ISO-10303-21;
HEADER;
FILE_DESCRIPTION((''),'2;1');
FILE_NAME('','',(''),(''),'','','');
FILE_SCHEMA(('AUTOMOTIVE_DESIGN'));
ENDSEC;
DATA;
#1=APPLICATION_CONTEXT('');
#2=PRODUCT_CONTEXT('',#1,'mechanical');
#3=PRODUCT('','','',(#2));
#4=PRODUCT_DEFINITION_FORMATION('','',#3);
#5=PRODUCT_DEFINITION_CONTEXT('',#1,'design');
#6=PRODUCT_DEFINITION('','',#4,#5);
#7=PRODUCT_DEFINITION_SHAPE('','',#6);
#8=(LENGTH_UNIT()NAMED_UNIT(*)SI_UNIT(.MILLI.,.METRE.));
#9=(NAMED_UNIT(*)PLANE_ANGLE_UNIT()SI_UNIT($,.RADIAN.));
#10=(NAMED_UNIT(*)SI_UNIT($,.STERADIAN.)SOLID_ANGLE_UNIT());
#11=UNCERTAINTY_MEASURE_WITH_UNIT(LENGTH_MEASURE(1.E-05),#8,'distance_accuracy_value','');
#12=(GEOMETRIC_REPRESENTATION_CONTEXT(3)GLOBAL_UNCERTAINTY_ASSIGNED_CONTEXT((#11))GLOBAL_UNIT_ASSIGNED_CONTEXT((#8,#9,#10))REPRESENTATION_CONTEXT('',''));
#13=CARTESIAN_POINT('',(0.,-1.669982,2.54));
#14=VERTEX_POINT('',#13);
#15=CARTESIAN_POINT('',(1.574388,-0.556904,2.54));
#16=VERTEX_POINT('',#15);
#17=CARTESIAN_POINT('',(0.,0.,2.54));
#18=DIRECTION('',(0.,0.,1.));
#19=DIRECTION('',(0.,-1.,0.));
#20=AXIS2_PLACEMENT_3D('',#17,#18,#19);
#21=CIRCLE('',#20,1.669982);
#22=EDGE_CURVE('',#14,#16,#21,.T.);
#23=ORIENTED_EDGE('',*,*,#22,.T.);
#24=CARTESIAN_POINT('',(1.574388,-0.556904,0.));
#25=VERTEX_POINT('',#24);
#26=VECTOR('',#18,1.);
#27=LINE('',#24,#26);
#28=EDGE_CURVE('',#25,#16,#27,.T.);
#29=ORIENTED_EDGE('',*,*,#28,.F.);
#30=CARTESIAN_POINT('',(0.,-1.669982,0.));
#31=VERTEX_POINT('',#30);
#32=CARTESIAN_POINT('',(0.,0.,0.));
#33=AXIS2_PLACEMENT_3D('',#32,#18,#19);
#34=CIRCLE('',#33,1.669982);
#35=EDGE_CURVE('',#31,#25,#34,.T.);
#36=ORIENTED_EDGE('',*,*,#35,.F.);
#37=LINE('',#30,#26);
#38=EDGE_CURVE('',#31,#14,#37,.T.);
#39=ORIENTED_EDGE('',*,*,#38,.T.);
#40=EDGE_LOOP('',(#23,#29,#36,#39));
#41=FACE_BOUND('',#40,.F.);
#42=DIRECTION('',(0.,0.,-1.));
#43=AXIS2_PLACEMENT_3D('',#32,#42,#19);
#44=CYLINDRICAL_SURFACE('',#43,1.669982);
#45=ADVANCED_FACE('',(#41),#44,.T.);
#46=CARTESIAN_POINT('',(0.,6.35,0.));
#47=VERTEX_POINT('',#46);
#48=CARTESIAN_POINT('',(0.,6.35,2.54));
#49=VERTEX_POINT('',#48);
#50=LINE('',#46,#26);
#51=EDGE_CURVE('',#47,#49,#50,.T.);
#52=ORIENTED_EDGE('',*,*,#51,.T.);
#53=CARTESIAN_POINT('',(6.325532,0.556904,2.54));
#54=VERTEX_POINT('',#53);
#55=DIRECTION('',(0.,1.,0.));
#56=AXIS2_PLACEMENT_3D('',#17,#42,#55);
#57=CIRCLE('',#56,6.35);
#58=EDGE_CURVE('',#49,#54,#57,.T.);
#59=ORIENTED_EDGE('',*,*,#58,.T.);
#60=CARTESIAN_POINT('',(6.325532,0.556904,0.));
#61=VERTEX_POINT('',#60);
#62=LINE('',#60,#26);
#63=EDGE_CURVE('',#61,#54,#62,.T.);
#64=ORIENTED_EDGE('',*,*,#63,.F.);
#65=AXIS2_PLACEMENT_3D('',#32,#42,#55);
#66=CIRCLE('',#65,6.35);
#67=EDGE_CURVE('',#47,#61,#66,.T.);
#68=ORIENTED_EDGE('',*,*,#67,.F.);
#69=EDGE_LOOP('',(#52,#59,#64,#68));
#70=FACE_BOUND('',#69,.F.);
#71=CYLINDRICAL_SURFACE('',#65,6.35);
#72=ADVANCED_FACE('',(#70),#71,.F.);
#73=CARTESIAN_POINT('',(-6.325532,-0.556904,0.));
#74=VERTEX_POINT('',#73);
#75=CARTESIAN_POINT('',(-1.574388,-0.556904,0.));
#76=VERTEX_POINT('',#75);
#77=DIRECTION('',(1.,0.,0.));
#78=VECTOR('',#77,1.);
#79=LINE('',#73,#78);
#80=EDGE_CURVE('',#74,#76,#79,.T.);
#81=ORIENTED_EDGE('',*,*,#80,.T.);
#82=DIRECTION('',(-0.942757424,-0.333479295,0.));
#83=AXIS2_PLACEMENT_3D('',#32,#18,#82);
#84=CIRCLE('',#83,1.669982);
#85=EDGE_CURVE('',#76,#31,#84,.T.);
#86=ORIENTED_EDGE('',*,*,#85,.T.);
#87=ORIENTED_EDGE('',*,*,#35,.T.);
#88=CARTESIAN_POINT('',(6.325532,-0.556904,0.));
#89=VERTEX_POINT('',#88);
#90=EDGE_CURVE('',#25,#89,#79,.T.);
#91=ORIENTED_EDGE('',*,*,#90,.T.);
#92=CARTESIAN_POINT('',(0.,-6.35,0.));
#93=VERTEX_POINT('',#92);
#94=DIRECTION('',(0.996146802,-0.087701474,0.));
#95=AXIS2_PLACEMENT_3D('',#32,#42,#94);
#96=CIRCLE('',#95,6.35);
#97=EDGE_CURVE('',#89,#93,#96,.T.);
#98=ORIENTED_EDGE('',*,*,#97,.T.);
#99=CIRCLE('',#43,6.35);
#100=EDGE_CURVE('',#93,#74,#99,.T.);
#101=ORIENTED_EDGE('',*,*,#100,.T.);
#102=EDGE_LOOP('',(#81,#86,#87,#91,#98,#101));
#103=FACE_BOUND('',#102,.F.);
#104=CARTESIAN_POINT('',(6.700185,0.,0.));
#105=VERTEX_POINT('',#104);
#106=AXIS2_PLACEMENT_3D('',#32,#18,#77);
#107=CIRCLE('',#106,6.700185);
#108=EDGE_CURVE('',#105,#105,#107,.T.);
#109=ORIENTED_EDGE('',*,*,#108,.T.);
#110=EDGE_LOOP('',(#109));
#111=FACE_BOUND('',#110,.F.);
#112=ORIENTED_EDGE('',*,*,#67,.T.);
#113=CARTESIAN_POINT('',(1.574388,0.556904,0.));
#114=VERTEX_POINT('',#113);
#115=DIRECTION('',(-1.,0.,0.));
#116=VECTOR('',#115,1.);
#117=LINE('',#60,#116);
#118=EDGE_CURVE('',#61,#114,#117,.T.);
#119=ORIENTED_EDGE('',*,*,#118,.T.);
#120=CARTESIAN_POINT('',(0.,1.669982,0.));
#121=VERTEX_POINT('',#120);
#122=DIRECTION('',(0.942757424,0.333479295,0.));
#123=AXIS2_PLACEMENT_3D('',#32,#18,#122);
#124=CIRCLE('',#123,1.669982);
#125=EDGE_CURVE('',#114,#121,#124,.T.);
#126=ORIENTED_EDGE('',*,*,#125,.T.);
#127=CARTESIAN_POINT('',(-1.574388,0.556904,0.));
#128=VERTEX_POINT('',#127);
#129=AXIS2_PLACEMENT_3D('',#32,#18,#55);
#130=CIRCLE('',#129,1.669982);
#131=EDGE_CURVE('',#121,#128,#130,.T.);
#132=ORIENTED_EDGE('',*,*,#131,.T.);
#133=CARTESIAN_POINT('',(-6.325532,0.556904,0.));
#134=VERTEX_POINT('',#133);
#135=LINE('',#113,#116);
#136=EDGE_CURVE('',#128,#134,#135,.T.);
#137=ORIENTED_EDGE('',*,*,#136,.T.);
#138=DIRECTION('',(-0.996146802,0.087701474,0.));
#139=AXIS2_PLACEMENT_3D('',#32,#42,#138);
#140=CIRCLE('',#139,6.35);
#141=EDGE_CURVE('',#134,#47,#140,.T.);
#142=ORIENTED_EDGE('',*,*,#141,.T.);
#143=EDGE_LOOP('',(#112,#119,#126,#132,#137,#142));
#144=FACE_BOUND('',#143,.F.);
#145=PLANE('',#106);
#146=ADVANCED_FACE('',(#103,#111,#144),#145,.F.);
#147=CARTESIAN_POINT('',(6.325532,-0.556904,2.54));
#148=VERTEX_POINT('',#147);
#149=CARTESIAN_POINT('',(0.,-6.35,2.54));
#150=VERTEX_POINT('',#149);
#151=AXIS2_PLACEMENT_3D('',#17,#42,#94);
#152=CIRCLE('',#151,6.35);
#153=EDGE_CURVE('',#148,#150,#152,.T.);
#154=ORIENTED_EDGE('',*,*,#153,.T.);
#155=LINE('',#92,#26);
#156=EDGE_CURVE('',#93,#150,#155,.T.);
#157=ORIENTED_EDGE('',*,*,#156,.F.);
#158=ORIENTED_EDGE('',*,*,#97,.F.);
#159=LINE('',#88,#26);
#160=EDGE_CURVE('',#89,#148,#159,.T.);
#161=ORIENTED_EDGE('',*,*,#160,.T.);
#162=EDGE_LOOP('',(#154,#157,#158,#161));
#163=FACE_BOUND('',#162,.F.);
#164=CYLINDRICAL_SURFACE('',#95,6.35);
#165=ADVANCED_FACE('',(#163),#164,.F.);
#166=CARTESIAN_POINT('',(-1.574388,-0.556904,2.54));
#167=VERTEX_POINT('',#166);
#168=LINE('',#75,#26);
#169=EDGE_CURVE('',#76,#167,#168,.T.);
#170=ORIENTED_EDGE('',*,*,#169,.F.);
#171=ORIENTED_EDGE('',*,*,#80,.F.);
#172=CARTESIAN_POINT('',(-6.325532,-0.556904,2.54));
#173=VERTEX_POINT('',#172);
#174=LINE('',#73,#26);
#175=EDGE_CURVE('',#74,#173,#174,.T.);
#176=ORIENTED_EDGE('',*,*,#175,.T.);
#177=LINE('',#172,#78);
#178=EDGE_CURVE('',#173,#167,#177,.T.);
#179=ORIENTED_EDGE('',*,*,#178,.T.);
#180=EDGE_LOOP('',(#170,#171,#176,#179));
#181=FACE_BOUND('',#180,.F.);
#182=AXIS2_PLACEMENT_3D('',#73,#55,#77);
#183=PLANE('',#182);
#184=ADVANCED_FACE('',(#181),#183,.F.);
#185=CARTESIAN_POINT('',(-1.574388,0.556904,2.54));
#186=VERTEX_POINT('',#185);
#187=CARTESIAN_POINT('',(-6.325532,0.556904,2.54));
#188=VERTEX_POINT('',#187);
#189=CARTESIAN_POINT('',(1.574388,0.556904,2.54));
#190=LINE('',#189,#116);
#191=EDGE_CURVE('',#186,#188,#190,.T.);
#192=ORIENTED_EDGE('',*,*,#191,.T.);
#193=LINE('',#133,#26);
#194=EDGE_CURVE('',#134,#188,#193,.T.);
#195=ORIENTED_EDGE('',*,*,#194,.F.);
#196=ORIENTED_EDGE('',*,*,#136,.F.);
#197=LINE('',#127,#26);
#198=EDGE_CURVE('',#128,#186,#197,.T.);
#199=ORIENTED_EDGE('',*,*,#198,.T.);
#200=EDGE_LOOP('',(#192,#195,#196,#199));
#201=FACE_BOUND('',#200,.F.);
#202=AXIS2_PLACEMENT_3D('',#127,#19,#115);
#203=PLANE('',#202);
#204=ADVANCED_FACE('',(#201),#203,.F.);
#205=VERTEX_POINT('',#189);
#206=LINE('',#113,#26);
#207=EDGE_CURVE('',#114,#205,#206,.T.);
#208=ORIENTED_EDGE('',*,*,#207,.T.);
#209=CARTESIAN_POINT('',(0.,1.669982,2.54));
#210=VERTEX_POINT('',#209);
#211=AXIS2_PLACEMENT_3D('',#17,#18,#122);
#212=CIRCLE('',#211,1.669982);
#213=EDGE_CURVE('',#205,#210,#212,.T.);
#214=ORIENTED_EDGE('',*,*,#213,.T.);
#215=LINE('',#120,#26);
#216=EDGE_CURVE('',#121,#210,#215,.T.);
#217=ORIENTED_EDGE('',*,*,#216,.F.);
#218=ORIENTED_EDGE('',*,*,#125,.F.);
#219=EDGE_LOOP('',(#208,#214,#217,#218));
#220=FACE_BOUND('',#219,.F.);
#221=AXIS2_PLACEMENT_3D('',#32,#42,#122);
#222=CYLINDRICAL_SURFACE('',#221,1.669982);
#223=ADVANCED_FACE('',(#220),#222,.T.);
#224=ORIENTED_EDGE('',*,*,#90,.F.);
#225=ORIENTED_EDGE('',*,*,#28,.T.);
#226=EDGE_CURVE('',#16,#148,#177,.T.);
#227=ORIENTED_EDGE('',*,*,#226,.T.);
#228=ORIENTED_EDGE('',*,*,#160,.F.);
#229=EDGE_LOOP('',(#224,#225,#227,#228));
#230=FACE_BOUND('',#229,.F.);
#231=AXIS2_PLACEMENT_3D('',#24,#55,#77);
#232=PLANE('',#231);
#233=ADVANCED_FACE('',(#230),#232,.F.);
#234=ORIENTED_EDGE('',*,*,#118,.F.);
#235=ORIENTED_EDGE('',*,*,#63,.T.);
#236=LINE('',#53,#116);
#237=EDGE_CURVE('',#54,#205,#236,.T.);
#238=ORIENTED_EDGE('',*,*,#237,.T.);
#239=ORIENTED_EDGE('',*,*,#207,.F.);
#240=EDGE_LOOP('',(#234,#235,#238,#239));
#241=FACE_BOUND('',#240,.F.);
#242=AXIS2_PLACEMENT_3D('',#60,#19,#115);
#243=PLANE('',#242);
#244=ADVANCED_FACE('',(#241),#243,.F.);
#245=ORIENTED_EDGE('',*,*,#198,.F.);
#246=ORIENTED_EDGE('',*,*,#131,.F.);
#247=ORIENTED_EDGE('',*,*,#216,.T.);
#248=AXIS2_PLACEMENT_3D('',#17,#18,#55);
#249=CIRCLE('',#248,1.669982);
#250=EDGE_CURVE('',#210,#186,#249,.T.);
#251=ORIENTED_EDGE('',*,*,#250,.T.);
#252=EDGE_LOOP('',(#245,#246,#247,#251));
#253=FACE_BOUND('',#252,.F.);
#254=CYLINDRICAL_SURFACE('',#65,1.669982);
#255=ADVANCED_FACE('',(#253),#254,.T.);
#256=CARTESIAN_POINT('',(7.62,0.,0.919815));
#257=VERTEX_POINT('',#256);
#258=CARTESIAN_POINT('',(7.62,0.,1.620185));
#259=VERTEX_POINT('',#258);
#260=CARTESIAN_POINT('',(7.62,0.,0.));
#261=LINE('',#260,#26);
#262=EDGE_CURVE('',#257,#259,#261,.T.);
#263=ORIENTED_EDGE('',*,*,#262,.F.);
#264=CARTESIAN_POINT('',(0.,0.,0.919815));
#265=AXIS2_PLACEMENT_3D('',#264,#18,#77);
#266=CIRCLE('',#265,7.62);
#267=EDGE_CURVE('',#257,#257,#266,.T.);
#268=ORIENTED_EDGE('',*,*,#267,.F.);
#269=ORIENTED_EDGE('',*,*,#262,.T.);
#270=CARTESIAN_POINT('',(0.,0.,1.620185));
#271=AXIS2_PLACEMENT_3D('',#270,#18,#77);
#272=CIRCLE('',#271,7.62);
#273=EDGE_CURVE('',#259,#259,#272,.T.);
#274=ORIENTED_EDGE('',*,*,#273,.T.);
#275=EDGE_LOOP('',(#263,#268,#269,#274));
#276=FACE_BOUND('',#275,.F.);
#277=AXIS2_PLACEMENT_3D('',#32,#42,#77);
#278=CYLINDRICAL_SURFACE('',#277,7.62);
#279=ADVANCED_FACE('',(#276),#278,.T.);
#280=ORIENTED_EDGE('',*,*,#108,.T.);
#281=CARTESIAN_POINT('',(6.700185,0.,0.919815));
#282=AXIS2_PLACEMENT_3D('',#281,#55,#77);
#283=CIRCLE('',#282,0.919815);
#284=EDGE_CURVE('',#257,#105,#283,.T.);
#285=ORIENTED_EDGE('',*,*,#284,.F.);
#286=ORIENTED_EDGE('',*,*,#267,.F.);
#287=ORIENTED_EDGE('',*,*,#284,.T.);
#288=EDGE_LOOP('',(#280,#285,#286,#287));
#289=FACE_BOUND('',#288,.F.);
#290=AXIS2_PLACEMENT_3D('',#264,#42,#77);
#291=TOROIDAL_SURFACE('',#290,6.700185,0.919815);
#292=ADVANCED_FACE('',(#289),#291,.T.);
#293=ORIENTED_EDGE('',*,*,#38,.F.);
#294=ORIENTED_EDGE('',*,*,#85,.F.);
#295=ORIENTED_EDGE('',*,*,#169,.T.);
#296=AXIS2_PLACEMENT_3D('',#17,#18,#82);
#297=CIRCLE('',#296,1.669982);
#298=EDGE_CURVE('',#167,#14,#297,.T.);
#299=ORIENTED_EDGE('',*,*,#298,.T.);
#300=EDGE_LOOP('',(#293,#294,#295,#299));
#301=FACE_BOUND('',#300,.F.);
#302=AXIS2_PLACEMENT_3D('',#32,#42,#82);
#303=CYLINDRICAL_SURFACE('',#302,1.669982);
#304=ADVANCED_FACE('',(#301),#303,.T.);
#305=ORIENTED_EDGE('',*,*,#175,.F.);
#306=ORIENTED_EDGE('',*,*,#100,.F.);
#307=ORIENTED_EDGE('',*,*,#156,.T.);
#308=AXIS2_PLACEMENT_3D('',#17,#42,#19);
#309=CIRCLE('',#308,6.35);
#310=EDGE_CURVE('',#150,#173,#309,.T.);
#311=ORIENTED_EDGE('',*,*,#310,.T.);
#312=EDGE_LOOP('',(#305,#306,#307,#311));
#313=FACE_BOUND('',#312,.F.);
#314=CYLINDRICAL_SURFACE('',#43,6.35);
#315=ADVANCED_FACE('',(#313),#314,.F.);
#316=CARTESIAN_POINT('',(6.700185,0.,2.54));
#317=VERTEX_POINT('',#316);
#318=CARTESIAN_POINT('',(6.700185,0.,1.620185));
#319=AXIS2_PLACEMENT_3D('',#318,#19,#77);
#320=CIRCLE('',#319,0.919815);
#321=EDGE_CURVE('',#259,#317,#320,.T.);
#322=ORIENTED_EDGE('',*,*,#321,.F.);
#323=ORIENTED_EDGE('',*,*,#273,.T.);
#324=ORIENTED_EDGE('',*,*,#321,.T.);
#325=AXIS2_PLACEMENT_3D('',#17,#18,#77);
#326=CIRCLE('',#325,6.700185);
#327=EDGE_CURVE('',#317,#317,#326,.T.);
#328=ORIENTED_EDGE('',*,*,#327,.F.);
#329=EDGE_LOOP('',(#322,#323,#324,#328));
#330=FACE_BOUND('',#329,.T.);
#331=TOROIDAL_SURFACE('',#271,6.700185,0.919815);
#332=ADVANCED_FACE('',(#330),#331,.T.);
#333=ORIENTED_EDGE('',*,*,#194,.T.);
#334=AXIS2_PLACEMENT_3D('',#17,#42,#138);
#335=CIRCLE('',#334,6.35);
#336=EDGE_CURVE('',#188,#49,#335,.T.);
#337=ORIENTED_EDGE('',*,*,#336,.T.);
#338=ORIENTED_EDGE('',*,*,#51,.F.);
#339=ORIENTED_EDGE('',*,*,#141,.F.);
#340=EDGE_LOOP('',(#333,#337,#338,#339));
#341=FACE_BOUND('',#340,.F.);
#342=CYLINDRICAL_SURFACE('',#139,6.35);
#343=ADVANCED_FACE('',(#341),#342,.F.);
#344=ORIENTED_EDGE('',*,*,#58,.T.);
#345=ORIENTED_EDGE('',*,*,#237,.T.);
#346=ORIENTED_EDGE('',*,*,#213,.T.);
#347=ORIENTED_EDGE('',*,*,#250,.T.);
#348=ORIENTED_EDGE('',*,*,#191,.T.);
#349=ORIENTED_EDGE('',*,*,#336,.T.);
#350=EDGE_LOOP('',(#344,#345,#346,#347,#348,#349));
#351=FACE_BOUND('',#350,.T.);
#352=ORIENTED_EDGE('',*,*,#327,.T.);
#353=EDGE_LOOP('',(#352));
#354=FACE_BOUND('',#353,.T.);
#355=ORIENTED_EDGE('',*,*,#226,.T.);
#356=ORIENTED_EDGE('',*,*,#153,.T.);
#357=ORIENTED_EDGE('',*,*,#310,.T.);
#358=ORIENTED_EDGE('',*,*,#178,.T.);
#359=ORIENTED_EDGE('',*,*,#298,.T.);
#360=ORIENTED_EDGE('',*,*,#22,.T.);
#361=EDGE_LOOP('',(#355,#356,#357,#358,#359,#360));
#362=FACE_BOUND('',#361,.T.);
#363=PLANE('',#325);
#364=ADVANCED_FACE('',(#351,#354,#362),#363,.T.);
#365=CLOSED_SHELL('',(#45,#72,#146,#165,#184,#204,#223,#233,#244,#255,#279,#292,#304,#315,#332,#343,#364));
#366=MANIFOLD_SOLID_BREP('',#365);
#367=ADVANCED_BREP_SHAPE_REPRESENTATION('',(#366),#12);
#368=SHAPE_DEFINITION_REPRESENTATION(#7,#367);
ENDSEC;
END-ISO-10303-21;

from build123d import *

# Parameters (mm, degrees)
F0_R     = 7.62
F1_DEPTH = 2.54
F2_R     = 0.9198153673


# Not quite as in the source:
# - a feature names something its author has since deleted; it is built from what else it names


with BuildPart() as f1:
    # F0 (on Top) → F1 (new body)
    with BuildSketch(Plane.XY):
        Circle(F0_R)
        with BuildLine():
            ThreePointArc((-6.325532194, -0.5569043569), (-6.3438800994, -0.2787207995), (-6.35, 0))
            ThreePointArc((-6.35, 0), (-6.3438800994, 0.2787207995), (-6.325532194, 0.5569043569))
            ThreePointArc((-6.325532194, 0.5569043569), (-4.28871527, 4.6828860047), (0, 6.35))
            ThreePointArc((0, 6.35), (4.28871527, 4.6828860047), (6.325532194, 0.5569043569))
            ThreePointArc((6.325532194, 0.5569043569), (6.3438800994, 0.2787207995), (6.35, 0))
            ThreePointArc((6.35, 0), (6.3438800994, -0.2787207995), (6.325532194, -0.5569043569))
            ThreePointArc((6.325532194, -0.5569043569), (4.28871527, -4.6828860047), (0, -6.35))
            ThreePointArc((0, -6.35), (-4.28871527, -4.6828860047), (-6.325532194, -0.5569043569))
        make_face(mode=Mode.SUBTRACT)
        with BuildLine():
            ThreePointArc((-1.5743877497, 0.5569043569), (-1.6459098023, 0.2825246393), (-1.6699818111, 0))
            Line((-1.6699818111, 0), (0, 0))
            Line((0, 0), (0, 0.5569043569))
            Line((0, 0.5569043569), (-1.5743877497, 0.5569043569))
        make_face()
        with BuildLine():
            ThreePointArc((-6.325532194, 0.5569043569), (-6.3438800994, 0.2787207995), (-6.35, 0))
            Line((-6.35, 0), (-1.6699818111, 0))
            ThreePointArc((-1.6699818111, 0), (-1.6459098023, 0.2825246393), (-1.5743877497, 0.5569043569))
            Line((-1.5743877497, 0.5569043569), (-6.325532194, 0.5569043569))
        make_face()
        with BuildLine():
            Line((-1.6699818111, 0), (-6.35, 0))
            ThreePointArc((-6.35, 0), (-6.3438800994, -0.2787207995), (-6.325532194, -0.5569043569))
            Line((-6.325532194, -0.5569043569), (-1.5743877497, -0.5569043569))
            ThreePointArc((-1.5743877497, -0.5569043569), (-1.6459098023, -0.2825246393), (-1.6699818111, 0))
        make_face()
        with BuildLine():
            Line((0, 0), (-1.6699818111, 0))
            ThreePointArc((-1.6699818111, 0), (-1.6459098023, -0.2825246393), (-1.5743877497, -0.5569043569))
            Line((-1.5743877497, -0.5569043569), (0, -0.5569043569))
            Line((0, -0.5569043569), (0, 0))
        make_face()
        with BuildLine():
            Line((0, 0.5569043569), (0, 0))
            Line((0, 0), (1.6699818111, 0))
            ThreePointArc((1.6699818111, 0), (1.6459098023, 0.2825246393), (1.5743877497, 0.5569043569))
            Line((1.5743877497, 0.5569043569), (0, 0.5569043569))
        make_face()
        with BuildLine():
            Line((1.5743877497, -0.5569043569), (6.325532194, -0.5569043569))
            ThreePointArc((6.325532194, -0.5569043569), (6.3438800994, -0.2787207995), (6.35, 0))
            Line((6.35, 0), (1.6699818111, 0))
            ThreePointArc((1.6699818111, 0), (1.6459098023, -0.2825246393), (1.5743877497, -0.5569043569))
        make_face()
        with BuildLine():
            Line((1.6699818111, 0), (0, 0))
            Line((0, 0), (0, -0.5569043569))
            Line((0, -0.5569043569), (1.5743877497, -0.5569043569))
            ThreePointArc((1.5743877497, -0.5569043569), (1.6459098023, -0.2825246393), (1.6699818111, 0))
        make_face()
        with BuildLine():
            ThreePointArc((1.5743877497, 0.5569043569), (0.9640588941, 1.3636090708), (0, 1.6699818111))
            Line((0, 1.6699818111), (0, 0.5569043569))
            Line((0, 0.5569043569), (1.5743877497, 0.5569043569))
        make_face()
        with BuildLine():
            ThreePointArc((0, 1.6699818111), (-0.9640588941, 1.3636090708), (-1.5743877497, 0.5569043569))
            Line((-1.5743877497, 0.5569043569), (0, 0.5569043569))
            Line((0, 0.5569043569), (0, 1.6699818111))
        make_face()
        with BuildLine():
            Line((0, -0.5569043569), (-1.5743877497, -0.5569043569))
            ThreePointArc((-1.5743877497, -0.5569043569), (-0.9640588941, -1.3636090708), (0, -1.6699818111))
            Line((0, -1.6699818111), (0, -0.5569043569))
        make_face()
        with BuildLine():
            Line((0, -0.5569043569), (0, -1.6699818111))
            ThreePointArc((0, -1.6699818111), (0.9640588941, -1.3636090708), (1.5743877497, -0.5569043569))
            Line((1.5743877497, -0.5569043569), (0, -0.5569043569))
        make_face()
        with BuildLine():
            ThreePointArc((6.35, 0), (6.3438800994, 0.2787207995), (6.325532194, 0.5569043569))
            Line((6.325532194, 0.5569043569), (1.5743877497, 0.5569043569))
            ThreePointArc((1.5743877497, 0.5569043569), (1.6459098023, 0.2825246393), (1.6699818111, 0))
            Line((1.6699818111, 0), (6.35, 0))
        make_face()
    extrude(amount=F1_DEPTH)

    # F2
    f2_edges = [f1.edges().sort_by_distance(p)[0] for p in [
        (-7.62, 0, 2.54),
        (-7.62, 0, 0),
    ]]
    fillet(f2_edges, radius=F2_R)


solid = f1.part
